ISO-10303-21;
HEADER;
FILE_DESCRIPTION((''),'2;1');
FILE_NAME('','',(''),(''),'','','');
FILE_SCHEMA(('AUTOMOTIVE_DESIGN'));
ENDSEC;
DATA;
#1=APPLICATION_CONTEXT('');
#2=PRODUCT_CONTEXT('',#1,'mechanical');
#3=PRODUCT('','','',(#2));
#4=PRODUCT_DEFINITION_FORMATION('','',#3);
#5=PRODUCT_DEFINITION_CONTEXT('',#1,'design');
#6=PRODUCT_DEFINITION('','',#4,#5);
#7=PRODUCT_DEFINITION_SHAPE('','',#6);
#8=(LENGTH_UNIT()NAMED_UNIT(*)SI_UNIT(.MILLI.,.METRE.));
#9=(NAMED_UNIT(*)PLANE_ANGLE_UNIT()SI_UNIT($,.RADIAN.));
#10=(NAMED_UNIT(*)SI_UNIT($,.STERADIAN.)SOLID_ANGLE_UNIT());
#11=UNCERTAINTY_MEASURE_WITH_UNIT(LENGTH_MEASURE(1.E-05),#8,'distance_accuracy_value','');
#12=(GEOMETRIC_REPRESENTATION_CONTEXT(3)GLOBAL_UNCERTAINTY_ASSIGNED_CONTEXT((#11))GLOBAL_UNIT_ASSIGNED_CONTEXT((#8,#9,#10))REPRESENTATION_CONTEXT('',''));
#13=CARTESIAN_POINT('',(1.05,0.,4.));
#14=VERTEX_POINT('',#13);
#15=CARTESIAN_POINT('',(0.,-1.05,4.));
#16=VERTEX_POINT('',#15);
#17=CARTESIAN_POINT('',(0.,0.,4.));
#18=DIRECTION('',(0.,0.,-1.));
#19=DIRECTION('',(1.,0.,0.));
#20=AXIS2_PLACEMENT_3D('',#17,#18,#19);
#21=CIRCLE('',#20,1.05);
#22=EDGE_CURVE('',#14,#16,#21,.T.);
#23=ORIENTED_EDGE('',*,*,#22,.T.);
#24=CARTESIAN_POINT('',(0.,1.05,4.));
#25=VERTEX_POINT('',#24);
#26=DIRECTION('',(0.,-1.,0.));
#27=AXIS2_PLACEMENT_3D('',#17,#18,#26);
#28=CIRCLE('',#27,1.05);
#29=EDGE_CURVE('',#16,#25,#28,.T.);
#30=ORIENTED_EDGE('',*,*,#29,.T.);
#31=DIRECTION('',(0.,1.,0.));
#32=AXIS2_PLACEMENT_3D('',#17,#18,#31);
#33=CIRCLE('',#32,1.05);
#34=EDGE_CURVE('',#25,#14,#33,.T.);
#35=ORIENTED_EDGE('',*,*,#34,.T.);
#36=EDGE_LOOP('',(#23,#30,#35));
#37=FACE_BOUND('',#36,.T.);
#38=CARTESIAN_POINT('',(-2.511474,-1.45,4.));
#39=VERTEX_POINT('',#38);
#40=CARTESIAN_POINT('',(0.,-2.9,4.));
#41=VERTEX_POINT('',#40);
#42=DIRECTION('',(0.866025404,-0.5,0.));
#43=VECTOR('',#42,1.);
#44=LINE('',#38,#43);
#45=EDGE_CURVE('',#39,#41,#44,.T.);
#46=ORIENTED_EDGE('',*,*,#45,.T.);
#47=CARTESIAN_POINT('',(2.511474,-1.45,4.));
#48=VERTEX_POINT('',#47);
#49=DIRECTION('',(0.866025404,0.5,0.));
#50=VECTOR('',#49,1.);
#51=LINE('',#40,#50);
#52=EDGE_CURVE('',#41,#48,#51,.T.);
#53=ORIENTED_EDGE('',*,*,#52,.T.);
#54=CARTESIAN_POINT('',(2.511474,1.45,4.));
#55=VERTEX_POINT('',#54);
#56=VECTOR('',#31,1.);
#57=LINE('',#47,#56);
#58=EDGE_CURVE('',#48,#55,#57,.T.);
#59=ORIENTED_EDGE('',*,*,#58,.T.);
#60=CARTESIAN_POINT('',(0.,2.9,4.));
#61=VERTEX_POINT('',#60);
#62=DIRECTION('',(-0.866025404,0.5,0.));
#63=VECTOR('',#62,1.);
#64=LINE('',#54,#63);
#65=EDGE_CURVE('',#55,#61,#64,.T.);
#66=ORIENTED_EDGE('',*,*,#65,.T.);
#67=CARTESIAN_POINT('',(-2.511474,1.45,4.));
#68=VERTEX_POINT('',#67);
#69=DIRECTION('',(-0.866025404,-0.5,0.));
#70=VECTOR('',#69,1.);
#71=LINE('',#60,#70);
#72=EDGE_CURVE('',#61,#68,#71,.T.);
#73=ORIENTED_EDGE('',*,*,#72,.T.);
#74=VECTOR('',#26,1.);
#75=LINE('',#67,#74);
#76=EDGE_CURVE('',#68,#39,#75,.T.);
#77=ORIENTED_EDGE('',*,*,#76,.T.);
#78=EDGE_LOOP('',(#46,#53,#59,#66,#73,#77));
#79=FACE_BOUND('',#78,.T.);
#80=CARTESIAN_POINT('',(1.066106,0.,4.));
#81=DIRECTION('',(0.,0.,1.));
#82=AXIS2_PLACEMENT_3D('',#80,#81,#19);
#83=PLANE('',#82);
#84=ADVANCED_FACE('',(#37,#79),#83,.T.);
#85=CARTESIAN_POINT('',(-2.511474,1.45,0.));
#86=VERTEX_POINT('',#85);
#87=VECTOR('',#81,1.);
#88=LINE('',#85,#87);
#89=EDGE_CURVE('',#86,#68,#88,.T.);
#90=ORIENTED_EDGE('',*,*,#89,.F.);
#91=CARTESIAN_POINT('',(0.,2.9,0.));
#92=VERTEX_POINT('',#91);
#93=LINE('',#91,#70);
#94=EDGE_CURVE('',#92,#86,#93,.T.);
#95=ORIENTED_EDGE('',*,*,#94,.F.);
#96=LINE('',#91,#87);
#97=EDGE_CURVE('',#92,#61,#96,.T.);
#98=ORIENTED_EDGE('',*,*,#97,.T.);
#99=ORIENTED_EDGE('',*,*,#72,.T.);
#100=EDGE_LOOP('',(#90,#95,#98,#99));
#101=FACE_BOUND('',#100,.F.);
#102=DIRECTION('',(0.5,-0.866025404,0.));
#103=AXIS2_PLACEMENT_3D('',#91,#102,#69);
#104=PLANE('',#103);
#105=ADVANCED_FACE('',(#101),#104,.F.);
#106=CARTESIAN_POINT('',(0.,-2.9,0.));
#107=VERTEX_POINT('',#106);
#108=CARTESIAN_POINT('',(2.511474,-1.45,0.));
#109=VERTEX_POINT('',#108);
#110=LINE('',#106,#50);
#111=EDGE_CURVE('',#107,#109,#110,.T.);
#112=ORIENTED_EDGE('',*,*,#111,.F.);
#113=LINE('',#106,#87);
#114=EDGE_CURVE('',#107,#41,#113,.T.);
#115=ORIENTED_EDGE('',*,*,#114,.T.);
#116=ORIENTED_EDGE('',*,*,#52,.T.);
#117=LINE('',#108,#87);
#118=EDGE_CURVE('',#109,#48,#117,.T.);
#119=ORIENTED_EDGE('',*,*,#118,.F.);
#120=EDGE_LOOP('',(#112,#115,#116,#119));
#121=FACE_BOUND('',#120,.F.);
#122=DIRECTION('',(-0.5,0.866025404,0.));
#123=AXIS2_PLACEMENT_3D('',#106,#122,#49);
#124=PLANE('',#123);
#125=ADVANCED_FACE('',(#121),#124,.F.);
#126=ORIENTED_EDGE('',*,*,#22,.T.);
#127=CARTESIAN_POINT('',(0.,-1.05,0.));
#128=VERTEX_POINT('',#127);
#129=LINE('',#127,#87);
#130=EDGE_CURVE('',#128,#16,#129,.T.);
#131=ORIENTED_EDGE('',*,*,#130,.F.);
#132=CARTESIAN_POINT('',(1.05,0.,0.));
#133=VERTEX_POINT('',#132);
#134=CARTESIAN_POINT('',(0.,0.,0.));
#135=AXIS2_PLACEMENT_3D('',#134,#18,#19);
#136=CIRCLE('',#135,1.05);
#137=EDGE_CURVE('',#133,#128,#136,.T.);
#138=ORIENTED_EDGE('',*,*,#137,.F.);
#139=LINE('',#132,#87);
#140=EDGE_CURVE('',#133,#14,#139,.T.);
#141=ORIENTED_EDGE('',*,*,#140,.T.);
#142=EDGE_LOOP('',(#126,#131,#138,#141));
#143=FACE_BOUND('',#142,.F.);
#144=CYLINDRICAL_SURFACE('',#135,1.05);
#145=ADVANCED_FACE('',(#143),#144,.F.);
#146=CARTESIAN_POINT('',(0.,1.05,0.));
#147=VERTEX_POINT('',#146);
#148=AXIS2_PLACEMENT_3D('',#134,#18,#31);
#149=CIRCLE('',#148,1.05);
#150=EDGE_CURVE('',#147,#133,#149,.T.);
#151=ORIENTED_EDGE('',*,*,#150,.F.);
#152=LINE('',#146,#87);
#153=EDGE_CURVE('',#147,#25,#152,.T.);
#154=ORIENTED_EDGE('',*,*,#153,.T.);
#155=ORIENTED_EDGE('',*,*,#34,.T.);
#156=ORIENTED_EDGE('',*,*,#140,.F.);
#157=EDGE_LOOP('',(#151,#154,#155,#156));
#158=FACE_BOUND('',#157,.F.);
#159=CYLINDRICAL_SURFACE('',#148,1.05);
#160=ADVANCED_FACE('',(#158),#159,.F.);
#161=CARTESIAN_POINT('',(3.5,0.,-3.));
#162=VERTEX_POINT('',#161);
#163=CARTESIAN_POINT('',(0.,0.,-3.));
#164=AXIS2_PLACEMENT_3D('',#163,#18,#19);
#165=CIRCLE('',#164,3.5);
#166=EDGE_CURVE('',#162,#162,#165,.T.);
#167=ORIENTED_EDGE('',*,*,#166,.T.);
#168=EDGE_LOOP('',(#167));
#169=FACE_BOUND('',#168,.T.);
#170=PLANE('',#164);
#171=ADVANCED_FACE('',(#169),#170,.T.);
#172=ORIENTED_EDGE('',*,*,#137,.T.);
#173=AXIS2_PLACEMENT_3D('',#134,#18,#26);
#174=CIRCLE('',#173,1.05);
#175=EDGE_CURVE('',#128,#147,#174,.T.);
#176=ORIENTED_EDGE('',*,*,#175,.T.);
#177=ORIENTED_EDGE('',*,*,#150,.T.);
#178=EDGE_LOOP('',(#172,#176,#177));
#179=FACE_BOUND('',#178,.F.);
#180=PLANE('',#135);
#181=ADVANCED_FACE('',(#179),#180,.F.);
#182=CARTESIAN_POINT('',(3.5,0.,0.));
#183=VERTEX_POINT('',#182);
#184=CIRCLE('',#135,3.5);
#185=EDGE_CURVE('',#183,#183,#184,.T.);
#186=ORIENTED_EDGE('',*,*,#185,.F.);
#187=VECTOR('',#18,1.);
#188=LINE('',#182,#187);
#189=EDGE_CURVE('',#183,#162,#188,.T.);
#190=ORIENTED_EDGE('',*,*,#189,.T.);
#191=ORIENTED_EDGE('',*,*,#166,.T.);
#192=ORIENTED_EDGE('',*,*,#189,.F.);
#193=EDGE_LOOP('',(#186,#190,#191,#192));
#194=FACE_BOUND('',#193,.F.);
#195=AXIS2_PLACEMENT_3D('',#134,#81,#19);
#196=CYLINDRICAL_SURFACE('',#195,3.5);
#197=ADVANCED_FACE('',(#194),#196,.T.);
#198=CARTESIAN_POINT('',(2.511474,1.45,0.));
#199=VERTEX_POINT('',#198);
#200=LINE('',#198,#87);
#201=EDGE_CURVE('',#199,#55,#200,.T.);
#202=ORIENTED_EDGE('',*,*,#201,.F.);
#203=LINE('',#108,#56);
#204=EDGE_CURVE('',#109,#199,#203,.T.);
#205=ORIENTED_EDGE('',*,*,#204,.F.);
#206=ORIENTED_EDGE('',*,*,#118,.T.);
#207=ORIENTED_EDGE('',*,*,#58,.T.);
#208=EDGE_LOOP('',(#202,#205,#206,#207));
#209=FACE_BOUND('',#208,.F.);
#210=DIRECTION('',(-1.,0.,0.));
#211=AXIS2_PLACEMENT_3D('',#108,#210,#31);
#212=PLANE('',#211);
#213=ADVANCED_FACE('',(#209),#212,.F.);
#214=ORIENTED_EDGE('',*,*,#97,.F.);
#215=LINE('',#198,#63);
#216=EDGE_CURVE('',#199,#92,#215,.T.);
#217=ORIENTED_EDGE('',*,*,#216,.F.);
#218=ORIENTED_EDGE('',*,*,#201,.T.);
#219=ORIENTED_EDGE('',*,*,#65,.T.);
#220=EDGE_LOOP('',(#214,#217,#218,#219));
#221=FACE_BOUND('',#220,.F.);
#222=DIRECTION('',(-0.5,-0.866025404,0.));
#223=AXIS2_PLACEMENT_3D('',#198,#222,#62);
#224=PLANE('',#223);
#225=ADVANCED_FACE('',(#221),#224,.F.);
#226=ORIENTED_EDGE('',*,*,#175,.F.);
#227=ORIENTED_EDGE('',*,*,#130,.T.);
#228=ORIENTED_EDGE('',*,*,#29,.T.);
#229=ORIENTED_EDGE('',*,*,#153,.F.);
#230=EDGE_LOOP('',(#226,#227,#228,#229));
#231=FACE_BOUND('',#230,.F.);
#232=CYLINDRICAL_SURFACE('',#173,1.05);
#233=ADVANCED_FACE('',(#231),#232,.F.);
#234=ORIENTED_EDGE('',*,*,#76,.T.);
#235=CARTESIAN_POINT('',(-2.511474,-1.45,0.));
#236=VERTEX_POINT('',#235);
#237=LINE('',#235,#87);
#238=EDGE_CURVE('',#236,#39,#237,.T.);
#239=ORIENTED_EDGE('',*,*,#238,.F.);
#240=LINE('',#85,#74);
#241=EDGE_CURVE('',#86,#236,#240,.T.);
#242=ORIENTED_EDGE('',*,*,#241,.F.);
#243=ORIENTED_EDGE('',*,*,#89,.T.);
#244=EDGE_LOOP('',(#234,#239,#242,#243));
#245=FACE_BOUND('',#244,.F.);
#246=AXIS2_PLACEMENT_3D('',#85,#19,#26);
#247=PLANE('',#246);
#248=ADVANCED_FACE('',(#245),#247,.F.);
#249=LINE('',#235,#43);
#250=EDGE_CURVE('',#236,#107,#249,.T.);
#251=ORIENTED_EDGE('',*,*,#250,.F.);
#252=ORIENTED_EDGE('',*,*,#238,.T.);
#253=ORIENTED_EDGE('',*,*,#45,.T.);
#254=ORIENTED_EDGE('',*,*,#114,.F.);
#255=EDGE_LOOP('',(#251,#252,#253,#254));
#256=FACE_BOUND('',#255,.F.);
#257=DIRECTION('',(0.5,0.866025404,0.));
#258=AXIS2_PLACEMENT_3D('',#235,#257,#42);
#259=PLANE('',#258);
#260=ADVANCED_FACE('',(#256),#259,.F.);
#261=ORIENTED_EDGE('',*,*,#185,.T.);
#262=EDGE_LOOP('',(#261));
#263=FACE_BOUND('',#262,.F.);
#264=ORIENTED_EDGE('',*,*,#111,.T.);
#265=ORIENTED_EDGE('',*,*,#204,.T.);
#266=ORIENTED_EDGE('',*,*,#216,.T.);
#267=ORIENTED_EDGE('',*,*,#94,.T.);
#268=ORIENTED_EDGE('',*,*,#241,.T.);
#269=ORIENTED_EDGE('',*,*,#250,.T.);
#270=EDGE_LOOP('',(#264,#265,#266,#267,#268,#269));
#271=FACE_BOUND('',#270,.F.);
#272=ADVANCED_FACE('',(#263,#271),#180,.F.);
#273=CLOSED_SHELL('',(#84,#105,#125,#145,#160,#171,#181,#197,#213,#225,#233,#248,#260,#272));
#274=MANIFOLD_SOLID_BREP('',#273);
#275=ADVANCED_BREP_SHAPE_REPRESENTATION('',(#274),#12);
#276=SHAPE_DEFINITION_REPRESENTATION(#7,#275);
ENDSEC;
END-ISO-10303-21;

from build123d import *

# Parameters (mm, degrees)
F1_DEPTH = 4
F2_R     = 3.5
F2_R_2   = 1.05
F3_DEPTH = 3


with BuildPart() as f1:
    # F0 (on Top) → F1 (new body)
    with BuildSketch(Plane.XY):
        with BuildLine():
            Line((2.511473671, -1.45), (2.511473671, 1.45))
            Line((2.511473671, 1.45), (0, 2.9))
            Line((0, 2.9), (0, 1.05))
            ThreePointArc((0, 1.05), (0.7424621202, 0.7424621202), (1.05, 0))
            ThreePointArc((1.05, 0), (0.7424621202, -0.7424621202), (0, -1.05))
            Line((0, -1.05), (0, -2.9))
            Line((0, -2.9), (2.511473671, -1.45))
        make_face()
        with BuildLine():
            Line((0, 1.05), (0, 2.9))
            Line((0, 2.9), (-2.511473671, 1.45))
            Line((-2.511473671, 1.45), (-2.511473671, -1.45))
            Line((-2.511473671, -1.45), (0, -2.9))
            Line((0, -2.9), (0, -1.05))
            ThreePointArc((0, -1.05), (-1.05, 0), (0, 1.05))
        make_face()
    extrude(amount=F1_DEPTH)

    # F2 (on face) → F3 (join)
    with BuildSketch(Plane(origin=(0, 0, 0), x_dir=(1, 0, 0), z_dir=(0, 0, -1))):
        Circle(F2_R)
        Polygon((0, 2.9), (2.511473671, 1.45), (2.511473671, -1.45), (0, -2.9), (-2.511473671, -1.45), (-2.511473671, 1.45), align=None, mode=Mode.SUBTRACT)
        Polygon((2.511473671, -1.45), (2.511473671, 1.45), (0, 2.9), (-2.511473671, 1.45), (-2.511473671, -1.45), (0, -2.9), align=None)
        Circle(F2_R_2, mode=Mode.SUBTRACT)
        Circle(F2_R_2)
    extrude(amount=F3_DEPTH)


solid = f1.part
